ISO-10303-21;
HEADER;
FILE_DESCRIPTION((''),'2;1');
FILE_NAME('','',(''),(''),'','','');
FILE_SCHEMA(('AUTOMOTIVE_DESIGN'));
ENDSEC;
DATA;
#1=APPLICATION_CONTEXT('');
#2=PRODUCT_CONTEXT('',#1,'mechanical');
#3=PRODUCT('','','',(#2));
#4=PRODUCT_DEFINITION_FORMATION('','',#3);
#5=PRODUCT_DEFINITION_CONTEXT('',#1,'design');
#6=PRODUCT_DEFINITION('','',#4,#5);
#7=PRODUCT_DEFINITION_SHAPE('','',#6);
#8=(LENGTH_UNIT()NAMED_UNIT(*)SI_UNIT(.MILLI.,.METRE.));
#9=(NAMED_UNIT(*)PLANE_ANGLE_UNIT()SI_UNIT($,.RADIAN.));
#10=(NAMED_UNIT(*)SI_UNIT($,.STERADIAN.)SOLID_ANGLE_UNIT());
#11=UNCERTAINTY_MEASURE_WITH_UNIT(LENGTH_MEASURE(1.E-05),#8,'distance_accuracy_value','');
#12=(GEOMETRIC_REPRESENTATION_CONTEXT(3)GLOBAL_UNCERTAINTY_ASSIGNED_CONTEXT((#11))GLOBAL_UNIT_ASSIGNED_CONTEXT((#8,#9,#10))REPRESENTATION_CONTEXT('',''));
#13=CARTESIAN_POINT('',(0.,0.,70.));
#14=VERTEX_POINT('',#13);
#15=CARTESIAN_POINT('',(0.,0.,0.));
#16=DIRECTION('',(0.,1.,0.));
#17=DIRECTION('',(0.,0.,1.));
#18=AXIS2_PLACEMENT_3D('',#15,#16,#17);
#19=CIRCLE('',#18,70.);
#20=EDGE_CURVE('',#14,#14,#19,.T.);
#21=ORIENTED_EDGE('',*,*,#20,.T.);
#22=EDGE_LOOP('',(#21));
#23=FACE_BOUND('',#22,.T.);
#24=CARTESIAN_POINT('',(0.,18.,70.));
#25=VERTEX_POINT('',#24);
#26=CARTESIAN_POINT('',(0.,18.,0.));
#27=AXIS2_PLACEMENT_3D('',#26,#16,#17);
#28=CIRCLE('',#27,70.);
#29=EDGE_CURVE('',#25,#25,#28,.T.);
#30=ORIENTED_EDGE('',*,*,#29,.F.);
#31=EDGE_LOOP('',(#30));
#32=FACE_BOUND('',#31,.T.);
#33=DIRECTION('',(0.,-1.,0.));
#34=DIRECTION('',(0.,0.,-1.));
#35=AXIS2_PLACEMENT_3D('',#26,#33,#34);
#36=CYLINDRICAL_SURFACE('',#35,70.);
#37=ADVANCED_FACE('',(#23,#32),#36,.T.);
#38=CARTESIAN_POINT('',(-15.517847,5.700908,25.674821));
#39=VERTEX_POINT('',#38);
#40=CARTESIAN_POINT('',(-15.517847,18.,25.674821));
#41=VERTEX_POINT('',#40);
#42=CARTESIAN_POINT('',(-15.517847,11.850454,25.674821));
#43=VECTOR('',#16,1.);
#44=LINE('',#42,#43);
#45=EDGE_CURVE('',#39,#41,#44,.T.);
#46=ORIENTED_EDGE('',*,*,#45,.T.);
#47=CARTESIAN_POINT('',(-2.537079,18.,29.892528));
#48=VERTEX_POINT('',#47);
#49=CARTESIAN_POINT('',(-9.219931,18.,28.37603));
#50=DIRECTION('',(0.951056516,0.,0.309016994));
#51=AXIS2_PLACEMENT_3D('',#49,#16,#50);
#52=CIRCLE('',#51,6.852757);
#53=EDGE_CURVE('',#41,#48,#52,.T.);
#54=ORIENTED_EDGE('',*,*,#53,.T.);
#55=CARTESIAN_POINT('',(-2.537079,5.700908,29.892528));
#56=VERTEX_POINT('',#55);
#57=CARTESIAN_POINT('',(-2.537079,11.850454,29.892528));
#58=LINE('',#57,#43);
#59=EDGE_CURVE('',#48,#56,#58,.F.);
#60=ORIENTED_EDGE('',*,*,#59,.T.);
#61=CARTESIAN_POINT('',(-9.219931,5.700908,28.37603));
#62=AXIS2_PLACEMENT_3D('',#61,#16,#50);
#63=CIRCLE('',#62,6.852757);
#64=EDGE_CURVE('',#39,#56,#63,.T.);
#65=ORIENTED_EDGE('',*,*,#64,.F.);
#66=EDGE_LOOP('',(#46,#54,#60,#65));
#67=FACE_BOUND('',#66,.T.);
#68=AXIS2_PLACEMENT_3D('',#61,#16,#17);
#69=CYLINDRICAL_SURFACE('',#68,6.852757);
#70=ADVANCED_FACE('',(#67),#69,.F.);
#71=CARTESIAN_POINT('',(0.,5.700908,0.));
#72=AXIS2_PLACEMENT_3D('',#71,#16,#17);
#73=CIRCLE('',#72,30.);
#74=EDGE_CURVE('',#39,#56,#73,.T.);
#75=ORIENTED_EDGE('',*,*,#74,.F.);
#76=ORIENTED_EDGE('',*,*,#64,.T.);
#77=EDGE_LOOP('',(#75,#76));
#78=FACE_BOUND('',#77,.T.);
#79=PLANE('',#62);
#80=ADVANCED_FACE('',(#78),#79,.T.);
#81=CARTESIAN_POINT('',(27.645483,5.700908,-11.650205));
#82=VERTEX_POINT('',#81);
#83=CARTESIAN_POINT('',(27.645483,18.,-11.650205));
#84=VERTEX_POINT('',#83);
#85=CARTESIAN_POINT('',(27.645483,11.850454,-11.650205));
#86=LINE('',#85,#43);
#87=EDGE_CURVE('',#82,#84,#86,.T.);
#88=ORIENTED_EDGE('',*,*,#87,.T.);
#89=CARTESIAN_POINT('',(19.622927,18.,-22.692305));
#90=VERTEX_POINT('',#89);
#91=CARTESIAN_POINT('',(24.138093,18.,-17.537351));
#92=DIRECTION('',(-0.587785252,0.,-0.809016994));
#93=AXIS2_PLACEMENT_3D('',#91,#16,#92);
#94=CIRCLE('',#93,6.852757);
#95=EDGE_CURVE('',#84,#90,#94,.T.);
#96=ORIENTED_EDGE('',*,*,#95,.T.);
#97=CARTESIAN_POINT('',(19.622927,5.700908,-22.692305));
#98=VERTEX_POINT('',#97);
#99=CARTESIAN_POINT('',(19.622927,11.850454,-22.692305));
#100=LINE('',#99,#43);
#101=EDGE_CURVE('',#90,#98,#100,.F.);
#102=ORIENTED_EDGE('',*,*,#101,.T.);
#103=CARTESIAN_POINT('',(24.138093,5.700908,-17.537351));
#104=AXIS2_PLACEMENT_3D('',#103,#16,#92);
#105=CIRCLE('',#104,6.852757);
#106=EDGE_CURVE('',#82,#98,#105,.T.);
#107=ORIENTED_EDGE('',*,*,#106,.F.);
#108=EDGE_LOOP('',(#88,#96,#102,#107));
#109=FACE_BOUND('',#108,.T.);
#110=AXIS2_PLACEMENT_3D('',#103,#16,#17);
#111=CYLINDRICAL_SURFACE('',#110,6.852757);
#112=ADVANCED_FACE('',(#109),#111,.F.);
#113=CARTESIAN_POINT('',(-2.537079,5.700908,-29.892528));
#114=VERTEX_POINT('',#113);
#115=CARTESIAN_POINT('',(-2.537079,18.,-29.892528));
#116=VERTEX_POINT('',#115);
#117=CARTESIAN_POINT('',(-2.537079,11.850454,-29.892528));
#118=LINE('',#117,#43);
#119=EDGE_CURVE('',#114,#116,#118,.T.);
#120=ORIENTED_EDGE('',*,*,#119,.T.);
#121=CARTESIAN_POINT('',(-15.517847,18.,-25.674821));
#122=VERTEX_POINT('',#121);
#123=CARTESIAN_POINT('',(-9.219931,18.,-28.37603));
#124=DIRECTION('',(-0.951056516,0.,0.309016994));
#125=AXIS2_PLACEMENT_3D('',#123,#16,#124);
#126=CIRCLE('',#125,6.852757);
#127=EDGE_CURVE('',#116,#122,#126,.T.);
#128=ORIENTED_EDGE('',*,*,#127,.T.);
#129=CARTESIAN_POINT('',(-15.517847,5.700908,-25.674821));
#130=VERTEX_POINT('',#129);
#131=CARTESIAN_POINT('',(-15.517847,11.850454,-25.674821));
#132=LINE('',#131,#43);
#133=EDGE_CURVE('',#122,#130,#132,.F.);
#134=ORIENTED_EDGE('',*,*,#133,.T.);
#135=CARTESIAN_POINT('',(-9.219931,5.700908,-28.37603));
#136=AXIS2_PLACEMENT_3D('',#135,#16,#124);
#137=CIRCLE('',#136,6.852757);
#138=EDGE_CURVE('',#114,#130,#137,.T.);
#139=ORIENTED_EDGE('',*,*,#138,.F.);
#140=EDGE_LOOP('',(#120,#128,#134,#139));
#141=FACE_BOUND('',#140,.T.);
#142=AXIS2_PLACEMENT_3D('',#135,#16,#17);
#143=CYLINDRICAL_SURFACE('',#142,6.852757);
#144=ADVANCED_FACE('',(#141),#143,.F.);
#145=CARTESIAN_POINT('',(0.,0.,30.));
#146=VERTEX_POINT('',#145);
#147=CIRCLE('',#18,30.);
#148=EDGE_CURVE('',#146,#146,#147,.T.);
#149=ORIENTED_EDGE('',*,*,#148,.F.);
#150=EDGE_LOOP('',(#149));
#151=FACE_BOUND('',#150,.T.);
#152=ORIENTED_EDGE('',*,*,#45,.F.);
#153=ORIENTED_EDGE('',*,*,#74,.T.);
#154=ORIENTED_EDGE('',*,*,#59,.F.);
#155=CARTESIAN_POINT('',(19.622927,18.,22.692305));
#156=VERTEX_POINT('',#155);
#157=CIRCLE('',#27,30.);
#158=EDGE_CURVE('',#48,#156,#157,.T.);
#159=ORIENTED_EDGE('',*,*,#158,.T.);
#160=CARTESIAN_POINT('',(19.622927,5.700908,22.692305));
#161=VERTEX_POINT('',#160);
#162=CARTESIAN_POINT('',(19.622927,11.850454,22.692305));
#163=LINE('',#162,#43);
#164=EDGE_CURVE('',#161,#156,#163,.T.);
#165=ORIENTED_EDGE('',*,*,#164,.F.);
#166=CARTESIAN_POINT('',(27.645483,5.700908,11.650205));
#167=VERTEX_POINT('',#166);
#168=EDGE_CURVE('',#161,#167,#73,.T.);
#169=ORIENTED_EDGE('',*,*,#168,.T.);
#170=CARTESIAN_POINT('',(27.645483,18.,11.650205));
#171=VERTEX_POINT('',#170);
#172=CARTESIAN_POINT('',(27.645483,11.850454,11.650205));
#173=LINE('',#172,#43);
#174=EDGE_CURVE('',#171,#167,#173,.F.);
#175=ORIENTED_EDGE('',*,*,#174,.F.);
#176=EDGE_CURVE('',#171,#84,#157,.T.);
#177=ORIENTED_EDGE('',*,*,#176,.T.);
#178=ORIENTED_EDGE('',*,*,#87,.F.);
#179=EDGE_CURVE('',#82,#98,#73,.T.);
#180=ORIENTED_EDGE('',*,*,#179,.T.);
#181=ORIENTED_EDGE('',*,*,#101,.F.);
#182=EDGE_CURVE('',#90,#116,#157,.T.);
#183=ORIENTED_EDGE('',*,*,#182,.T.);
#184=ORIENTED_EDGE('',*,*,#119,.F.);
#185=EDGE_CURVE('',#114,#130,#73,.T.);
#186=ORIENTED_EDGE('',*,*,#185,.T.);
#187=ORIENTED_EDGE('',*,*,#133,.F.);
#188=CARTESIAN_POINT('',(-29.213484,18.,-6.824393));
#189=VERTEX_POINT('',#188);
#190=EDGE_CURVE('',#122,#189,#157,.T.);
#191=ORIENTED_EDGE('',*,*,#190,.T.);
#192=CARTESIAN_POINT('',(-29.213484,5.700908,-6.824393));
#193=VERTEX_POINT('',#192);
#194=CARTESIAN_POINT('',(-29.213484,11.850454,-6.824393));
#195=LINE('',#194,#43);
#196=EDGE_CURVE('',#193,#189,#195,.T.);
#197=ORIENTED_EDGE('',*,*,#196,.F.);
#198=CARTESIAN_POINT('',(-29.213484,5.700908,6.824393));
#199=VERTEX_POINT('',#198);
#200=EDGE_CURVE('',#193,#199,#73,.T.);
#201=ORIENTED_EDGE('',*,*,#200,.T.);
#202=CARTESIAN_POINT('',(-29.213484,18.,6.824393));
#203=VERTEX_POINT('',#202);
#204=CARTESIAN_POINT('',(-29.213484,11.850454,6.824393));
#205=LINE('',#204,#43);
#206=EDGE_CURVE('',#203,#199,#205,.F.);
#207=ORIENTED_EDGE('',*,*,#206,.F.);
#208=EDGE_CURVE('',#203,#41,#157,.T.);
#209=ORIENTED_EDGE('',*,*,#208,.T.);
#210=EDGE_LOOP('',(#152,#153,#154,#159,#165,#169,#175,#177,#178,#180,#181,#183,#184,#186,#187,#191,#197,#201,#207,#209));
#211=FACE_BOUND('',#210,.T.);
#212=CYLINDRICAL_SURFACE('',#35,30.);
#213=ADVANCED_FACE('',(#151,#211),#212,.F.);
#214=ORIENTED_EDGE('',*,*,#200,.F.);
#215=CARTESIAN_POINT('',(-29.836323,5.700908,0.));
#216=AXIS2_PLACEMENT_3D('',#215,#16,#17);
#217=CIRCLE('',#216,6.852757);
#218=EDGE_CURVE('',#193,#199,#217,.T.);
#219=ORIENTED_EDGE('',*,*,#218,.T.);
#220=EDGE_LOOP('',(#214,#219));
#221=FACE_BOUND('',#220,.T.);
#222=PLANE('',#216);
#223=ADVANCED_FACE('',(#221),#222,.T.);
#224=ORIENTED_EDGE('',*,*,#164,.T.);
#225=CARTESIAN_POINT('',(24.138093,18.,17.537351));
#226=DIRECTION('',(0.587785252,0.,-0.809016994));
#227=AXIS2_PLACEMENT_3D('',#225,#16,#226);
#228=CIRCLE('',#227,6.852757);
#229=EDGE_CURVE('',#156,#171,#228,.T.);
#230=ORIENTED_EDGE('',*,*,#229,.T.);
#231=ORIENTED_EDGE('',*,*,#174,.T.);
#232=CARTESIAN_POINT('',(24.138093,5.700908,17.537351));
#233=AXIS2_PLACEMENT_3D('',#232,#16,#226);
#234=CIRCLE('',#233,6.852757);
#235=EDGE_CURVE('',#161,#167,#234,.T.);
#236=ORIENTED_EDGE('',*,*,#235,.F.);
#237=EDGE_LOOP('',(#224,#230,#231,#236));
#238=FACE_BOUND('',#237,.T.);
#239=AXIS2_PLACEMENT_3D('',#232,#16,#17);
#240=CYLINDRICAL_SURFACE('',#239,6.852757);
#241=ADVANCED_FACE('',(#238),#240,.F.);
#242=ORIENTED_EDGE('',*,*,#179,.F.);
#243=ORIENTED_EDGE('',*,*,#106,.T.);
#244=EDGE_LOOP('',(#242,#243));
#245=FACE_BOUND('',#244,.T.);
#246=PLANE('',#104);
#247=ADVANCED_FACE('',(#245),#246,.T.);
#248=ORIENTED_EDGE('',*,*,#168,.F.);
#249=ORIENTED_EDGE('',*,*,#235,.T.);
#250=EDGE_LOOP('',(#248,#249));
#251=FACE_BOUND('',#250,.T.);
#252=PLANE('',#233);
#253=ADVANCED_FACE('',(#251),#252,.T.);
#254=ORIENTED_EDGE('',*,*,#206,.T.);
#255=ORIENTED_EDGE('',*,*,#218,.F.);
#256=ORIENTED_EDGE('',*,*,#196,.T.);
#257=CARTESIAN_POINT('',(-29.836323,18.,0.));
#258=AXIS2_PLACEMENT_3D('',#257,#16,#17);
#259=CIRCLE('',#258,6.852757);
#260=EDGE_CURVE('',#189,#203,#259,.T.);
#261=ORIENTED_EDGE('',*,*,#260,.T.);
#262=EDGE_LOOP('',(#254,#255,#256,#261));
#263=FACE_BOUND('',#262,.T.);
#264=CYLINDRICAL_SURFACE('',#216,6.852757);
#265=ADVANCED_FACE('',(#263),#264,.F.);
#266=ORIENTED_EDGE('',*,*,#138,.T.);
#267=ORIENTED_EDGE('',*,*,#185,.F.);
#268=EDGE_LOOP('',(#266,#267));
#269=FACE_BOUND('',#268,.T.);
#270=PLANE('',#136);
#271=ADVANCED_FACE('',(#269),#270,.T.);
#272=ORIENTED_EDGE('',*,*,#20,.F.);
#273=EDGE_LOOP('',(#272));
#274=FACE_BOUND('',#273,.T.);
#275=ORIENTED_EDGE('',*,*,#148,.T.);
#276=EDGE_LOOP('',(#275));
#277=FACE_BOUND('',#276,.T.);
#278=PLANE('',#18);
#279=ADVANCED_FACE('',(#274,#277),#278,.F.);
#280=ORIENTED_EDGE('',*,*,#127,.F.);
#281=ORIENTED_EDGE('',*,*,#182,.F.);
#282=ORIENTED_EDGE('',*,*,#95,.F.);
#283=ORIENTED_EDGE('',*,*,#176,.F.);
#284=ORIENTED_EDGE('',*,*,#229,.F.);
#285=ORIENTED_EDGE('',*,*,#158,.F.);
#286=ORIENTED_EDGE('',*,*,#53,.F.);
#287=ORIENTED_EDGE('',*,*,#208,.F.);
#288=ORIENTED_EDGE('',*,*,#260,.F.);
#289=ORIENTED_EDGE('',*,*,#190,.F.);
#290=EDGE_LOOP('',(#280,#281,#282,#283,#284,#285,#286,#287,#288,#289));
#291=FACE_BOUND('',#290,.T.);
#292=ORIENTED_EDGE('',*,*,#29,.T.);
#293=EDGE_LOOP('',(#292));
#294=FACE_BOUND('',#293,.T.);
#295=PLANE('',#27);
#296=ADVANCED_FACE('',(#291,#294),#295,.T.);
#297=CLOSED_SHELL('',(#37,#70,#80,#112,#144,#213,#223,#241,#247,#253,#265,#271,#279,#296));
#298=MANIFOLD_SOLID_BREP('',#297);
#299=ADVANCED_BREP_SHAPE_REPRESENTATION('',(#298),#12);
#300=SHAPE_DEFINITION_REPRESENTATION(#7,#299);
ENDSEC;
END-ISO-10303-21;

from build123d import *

# Parameters (mm, degrees)
SKETCH1_R           = 70
BOSS_EXTRUDE1_DEPTH = 18
SKETCH2_R           = 30
CUT_EXTRUDE1_DEPTH  = 101.618089825
SKETCH3_R           = 6.852756537
CUT_EXTRUDE2_DEPTH  = 12.299091949
CIRPATTERN1_COUNT   = 5


with BuildPart() as part:
    # Sketch1 → Boss-Extrude1 (new body)
    with BuildSketch(Plane(origin=(0, 0, 0), x_dir=(1, 0, 0), z_dir=(0, 1, 0))):
        Circle(SKETCH1_R)
    extrude(amount=BOSS_EXTRUDE1_DEPTH)

    # Sketch2 → Cut-Extrude1 (cut, through all)
    with BuildSketch(Plane(origin=(0, 0, 0), x_dir=(1, 0, 0), z_dir=(0, 1, 0))):
        Circle(SKETCH2_R)
    extrude(amount=CUT_EXTRUDE1_DEPTH, mode=Mode.SUBTRACT)

    # Sketch3 → Cut-Extrude2 (cut)
    with BuildSketch(Plane(origin=(0, 18, 0), x_dir=(1, 0, 0), z_dir=(0, 1, 0))):
        with Locations((-29.836323448, 0)):
            Circle(SKETCH3_R)
    cut_extrude2 = extrude(amount=-CUT_EXTRUDE2_DEPTH, mode=Mode.SUBTRACT)

    # CirPattern1: Cut-Extrude2 ×5 about axis
    cirpattern1_axis = Axis((0, 0, 0), (0, 1, 0))
    for i in range(1, CIRPATTERN1_COUNT):
        add(cut_extrude2.rotate(cirpattern1_axis, i * 360 / CIRPATTERN1_COUNT), mode=Mode.SUBTRACT)


solid = part.part
